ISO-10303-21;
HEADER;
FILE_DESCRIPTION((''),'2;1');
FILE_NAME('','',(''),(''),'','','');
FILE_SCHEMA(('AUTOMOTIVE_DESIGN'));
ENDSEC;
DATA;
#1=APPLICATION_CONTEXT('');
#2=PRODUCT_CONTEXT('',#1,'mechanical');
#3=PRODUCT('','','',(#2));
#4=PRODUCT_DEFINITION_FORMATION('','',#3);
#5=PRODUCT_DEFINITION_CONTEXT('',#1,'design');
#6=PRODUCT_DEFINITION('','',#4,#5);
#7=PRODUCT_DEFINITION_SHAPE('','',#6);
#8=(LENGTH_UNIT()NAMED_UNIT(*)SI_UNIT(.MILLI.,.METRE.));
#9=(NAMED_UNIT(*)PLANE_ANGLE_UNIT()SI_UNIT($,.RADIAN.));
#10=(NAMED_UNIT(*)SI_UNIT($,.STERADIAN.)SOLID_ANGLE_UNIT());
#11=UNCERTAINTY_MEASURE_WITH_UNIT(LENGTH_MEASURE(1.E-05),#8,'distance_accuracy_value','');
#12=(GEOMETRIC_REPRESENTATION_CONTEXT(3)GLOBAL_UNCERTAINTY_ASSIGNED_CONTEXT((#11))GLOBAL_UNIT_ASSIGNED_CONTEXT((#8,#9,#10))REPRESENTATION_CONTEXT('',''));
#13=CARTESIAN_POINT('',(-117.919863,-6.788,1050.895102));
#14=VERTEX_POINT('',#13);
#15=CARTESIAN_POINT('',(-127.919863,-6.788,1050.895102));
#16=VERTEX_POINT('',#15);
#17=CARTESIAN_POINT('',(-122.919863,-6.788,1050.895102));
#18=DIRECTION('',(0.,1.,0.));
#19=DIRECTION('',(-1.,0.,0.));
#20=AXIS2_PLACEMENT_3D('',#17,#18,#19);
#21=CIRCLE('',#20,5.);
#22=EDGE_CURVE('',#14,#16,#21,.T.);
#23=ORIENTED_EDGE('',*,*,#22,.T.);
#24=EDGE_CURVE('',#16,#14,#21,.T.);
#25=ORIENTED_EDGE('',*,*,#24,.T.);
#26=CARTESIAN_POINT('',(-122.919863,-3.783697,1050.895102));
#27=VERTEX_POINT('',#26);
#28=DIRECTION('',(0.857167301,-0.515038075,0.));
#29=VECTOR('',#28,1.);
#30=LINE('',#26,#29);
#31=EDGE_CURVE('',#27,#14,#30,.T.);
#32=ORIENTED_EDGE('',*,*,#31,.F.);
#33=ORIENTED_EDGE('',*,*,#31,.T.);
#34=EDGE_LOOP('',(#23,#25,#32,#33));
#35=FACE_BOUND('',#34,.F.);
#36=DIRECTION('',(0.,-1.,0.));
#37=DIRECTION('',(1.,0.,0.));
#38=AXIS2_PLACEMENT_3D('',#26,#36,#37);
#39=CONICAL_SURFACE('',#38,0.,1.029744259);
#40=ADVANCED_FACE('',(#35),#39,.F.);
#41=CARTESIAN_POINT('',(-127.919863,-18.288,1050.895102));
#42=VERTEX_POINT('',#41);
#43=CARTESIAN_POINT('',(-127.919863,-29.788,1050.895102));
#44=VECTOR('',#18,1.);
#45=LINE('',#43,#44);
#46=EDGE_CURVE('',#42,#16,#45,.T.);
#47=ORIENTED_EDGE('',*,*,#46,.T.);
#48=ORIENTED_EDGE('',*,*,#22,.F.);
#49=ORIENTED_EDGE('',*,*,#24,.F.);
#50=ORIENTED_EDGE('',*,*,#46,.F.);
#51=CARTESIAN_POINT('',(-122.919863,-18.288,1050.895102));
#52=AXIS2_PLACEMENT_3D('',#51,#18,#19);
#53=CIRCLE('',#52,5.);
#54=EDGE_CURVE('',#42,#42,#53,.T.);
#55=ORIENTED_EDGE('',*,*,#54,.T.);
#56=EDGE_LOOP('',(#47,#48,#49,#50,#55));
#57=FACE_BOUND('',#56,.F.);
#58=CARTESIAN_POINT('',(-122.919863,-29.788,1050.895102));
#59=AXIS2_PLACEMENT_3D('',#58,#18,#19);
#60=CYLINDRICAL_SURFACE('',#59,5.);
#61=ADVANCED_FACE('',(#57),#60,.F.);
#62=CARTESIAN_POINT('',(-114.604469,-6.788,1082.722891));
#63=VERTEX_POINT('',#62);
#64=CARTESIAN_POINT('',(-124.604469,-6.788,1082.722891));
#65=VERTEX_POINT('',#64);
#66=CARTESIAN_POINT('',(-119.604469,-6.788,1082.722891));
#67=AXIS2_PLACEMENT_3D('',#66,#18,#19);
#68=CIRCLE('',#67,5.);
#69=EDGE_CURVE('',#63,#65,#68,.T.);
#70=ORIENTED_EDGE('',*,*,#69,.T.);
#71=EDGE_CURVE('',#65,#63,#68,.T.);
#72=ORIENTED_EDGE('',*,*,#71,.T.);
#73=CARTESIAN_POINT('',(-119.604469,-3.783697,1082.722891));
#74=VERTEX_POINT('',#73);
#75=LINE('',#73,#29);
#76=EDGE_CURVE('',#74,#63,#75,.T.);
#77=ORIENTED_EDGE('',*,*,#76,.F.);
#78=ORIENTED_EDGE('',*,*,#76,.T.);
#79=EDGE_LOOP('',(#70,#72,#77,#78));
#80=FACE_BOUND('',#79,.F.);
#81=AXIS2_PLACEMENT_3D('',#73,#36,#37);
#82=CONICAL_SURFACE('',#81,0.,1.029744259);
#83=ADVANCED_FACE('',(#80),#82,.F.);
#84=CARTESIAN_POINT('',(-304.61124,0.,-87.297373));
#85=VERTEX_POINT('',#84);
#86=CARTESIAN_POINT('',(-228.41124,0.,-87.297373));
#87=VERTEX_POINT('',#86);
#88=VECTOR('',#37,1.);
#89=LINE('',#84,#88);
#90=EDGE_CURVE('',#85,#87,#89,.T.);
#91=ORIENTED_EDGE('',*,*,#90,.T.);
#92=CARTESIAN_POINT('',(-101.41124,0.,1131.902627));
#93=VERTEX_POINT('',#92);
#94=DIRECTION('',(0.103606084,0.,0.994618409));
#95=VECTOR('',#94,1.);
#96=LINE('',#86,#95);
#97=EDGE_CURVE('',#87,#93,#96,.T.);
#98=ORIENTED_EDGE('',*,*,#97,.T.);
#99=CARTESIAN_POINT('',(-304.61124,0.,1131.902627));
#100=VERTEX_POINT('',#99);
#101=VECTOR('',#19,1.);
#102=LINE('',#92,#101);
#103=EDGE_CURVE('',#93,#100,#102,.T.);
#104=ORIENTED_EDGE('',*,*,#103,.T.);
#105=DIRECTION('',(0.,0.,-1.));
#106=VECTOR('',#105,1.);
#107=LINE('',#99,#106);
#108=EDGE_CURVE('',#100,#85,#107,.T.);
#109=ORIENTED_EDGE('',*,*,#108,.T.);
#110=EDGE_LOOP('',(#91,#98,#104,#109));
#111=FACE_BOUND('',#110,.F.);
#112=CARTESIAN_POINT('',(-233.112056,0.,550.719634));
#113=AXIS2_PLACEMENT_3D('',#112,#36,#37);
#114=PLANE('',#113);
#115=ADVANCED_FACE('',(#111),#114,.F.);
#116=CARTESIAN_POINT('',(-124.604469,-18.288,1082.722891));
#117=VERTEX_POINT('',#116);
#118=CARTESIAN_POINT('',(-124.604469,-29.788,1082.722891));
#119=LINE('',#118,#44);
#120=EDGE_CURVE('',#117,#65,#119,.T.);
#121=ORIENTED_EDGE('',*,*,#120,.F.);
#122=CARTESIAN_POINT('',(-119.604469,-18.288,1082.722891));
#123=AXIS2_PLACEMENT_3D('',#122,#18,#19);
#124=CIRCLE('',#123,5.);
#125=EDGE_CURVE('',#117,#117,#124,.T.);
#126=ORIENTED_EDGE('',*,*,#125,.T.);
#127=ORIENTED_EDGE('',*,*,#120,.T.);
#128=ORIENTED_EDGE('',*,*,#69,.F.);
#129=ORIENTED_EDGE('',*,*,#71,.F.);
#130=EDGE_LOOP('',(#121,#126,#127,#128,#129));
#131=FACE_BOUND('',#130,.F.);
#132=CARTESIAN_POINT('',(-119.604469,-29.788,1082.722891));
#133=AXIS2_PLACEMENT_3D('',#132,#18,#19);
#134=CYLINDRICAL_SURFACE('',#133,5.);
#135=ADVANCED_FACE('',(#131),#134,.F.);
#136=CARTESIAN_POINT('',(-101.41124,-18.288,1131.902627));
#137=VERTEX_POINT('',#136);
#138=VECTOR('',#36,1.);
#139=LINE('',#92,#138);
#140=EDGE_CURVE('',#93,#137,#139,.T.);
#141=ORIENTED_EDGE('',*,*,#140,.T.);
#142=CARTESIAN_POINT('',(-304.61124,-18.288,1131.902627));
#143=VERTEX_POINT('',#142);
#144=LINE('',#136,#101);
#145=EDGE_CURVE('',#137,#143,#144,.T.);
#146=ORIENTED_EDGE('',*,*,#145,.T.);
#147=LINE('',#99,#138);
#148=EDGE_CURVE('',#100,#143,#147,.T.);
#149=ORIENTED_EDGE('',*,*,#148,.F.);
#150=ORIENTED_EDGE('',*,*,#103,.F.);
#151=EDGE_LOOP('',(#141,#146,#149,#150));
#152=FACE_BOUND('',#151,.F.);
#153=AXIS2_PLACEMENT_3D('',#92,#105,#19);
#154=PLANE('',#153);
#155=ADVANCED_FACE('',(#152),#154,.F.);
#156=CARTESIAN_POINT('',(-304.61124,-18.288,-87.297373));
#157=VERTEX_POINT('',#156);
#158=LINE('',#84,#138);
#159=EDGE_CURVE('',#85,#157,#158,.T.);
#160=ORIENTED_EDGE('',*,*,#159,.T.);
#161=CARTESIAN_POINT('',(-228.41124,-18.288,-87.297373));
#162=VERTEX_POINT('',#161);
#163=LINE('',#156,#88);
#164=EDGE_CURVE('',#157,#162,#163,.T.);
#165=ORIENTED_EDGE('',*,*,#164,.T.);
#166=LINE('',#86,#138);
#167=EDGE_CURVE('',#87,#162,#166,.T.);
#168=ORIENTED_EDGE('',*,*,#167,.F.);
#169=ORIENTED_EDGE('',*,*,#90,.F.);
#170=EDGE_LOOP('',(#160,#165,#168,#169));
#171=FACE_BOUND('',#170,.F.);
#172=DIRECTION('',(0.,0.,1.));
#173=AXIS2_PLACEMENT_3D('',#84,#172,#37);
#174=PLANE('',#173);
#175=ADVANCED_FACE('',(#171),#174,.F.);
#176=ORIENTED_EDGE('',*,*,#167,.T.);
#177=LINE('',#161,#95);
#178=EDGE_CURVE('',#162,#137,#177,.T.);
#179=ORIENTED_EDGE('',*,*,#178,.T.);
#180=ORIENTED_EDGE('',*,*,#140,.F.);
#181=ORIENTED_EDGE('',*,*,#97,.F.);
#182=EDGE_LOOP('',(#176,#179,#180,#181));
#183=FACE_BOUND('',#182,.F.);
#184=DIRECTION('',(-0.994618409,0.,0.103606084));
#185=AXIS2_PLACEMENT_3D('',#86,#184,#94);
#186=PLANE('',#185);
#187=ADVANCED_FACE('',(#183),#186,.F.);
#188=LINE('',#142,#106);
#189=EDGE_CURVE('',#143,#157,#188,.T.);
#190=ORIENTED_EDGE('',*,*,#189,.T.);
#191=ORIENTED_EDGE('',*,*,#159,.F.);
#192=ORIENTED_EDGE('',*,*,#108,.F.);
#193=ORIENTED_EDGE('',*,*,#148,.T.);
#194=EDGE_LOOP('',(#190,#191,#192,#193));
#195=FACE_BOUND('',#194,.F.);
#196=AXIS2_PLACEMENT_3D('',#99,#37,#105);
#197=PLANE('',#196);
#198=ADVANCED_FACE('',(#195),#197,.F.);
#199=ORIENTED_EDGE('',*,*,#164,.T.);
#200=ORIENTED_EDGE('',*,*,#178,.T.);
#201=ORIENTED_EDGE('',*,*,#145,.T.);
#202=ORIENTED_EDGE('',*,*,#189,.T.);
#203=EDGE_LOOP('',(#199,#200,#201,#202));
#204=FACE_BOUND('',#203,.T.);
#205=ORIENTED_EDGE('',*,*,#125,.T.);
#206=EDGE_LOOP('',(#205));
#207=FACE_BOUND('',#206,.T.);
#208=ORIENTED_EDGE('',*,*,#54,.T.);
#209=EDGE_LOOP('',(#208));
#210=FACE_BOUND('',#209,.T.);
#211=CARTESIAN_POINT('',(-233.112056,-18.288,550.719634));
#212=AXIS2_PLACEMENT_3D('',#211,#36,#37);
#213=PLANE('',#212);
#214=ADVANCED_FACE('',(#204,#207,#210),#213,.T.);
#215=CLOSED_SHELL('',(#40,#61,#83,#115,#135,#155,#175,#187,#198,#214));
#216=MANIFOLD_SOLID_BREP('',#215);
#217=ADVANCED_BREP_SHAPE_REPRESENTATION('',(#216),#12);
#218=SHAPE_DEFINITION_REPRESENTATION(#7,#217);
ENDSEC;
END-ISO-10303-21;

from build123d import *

# Parameters (mm, degrees)
F2_DEPTH = 18.288
F4_D     = 10
F4_DEPTH = 11.5
F4_TIP   = 3.0043030951


# Not quite as in the source:
# - a variable given as a bare number and used for a length is read in inches; the dataset says mm whatever the document's units were


with BuildPart() as f2:
    # F0 (on Front) → F2 (new body)
    with BuildSketch(Plane.XZ):
        Polygon((-304.6112403404, 1131.9026269978), (-304.6112403404, -87.2973730022), (-228.4112403404, -87.2973730022), (-101.4112403404, 1131.9026269978), align=None)
    extrude(amount=F2_DEPTH)

    # F4
    with Locations(Plane.XZ.offset(18.288)):
        with Locations((-119.6044687363, 1082.7228909215), (-122.9198634326, 1050.895101837)):
            Hole(F4_D / 2, depth=F4_DEPTH)
            with Locations((0, 0, -(F4_DEPTH + F4_TIP / 2))):  # 118° drill point
                Cone(0, F4_D / 2, F4_TIP, mode=Mode.SUBTRACT)


solid = f2.part
